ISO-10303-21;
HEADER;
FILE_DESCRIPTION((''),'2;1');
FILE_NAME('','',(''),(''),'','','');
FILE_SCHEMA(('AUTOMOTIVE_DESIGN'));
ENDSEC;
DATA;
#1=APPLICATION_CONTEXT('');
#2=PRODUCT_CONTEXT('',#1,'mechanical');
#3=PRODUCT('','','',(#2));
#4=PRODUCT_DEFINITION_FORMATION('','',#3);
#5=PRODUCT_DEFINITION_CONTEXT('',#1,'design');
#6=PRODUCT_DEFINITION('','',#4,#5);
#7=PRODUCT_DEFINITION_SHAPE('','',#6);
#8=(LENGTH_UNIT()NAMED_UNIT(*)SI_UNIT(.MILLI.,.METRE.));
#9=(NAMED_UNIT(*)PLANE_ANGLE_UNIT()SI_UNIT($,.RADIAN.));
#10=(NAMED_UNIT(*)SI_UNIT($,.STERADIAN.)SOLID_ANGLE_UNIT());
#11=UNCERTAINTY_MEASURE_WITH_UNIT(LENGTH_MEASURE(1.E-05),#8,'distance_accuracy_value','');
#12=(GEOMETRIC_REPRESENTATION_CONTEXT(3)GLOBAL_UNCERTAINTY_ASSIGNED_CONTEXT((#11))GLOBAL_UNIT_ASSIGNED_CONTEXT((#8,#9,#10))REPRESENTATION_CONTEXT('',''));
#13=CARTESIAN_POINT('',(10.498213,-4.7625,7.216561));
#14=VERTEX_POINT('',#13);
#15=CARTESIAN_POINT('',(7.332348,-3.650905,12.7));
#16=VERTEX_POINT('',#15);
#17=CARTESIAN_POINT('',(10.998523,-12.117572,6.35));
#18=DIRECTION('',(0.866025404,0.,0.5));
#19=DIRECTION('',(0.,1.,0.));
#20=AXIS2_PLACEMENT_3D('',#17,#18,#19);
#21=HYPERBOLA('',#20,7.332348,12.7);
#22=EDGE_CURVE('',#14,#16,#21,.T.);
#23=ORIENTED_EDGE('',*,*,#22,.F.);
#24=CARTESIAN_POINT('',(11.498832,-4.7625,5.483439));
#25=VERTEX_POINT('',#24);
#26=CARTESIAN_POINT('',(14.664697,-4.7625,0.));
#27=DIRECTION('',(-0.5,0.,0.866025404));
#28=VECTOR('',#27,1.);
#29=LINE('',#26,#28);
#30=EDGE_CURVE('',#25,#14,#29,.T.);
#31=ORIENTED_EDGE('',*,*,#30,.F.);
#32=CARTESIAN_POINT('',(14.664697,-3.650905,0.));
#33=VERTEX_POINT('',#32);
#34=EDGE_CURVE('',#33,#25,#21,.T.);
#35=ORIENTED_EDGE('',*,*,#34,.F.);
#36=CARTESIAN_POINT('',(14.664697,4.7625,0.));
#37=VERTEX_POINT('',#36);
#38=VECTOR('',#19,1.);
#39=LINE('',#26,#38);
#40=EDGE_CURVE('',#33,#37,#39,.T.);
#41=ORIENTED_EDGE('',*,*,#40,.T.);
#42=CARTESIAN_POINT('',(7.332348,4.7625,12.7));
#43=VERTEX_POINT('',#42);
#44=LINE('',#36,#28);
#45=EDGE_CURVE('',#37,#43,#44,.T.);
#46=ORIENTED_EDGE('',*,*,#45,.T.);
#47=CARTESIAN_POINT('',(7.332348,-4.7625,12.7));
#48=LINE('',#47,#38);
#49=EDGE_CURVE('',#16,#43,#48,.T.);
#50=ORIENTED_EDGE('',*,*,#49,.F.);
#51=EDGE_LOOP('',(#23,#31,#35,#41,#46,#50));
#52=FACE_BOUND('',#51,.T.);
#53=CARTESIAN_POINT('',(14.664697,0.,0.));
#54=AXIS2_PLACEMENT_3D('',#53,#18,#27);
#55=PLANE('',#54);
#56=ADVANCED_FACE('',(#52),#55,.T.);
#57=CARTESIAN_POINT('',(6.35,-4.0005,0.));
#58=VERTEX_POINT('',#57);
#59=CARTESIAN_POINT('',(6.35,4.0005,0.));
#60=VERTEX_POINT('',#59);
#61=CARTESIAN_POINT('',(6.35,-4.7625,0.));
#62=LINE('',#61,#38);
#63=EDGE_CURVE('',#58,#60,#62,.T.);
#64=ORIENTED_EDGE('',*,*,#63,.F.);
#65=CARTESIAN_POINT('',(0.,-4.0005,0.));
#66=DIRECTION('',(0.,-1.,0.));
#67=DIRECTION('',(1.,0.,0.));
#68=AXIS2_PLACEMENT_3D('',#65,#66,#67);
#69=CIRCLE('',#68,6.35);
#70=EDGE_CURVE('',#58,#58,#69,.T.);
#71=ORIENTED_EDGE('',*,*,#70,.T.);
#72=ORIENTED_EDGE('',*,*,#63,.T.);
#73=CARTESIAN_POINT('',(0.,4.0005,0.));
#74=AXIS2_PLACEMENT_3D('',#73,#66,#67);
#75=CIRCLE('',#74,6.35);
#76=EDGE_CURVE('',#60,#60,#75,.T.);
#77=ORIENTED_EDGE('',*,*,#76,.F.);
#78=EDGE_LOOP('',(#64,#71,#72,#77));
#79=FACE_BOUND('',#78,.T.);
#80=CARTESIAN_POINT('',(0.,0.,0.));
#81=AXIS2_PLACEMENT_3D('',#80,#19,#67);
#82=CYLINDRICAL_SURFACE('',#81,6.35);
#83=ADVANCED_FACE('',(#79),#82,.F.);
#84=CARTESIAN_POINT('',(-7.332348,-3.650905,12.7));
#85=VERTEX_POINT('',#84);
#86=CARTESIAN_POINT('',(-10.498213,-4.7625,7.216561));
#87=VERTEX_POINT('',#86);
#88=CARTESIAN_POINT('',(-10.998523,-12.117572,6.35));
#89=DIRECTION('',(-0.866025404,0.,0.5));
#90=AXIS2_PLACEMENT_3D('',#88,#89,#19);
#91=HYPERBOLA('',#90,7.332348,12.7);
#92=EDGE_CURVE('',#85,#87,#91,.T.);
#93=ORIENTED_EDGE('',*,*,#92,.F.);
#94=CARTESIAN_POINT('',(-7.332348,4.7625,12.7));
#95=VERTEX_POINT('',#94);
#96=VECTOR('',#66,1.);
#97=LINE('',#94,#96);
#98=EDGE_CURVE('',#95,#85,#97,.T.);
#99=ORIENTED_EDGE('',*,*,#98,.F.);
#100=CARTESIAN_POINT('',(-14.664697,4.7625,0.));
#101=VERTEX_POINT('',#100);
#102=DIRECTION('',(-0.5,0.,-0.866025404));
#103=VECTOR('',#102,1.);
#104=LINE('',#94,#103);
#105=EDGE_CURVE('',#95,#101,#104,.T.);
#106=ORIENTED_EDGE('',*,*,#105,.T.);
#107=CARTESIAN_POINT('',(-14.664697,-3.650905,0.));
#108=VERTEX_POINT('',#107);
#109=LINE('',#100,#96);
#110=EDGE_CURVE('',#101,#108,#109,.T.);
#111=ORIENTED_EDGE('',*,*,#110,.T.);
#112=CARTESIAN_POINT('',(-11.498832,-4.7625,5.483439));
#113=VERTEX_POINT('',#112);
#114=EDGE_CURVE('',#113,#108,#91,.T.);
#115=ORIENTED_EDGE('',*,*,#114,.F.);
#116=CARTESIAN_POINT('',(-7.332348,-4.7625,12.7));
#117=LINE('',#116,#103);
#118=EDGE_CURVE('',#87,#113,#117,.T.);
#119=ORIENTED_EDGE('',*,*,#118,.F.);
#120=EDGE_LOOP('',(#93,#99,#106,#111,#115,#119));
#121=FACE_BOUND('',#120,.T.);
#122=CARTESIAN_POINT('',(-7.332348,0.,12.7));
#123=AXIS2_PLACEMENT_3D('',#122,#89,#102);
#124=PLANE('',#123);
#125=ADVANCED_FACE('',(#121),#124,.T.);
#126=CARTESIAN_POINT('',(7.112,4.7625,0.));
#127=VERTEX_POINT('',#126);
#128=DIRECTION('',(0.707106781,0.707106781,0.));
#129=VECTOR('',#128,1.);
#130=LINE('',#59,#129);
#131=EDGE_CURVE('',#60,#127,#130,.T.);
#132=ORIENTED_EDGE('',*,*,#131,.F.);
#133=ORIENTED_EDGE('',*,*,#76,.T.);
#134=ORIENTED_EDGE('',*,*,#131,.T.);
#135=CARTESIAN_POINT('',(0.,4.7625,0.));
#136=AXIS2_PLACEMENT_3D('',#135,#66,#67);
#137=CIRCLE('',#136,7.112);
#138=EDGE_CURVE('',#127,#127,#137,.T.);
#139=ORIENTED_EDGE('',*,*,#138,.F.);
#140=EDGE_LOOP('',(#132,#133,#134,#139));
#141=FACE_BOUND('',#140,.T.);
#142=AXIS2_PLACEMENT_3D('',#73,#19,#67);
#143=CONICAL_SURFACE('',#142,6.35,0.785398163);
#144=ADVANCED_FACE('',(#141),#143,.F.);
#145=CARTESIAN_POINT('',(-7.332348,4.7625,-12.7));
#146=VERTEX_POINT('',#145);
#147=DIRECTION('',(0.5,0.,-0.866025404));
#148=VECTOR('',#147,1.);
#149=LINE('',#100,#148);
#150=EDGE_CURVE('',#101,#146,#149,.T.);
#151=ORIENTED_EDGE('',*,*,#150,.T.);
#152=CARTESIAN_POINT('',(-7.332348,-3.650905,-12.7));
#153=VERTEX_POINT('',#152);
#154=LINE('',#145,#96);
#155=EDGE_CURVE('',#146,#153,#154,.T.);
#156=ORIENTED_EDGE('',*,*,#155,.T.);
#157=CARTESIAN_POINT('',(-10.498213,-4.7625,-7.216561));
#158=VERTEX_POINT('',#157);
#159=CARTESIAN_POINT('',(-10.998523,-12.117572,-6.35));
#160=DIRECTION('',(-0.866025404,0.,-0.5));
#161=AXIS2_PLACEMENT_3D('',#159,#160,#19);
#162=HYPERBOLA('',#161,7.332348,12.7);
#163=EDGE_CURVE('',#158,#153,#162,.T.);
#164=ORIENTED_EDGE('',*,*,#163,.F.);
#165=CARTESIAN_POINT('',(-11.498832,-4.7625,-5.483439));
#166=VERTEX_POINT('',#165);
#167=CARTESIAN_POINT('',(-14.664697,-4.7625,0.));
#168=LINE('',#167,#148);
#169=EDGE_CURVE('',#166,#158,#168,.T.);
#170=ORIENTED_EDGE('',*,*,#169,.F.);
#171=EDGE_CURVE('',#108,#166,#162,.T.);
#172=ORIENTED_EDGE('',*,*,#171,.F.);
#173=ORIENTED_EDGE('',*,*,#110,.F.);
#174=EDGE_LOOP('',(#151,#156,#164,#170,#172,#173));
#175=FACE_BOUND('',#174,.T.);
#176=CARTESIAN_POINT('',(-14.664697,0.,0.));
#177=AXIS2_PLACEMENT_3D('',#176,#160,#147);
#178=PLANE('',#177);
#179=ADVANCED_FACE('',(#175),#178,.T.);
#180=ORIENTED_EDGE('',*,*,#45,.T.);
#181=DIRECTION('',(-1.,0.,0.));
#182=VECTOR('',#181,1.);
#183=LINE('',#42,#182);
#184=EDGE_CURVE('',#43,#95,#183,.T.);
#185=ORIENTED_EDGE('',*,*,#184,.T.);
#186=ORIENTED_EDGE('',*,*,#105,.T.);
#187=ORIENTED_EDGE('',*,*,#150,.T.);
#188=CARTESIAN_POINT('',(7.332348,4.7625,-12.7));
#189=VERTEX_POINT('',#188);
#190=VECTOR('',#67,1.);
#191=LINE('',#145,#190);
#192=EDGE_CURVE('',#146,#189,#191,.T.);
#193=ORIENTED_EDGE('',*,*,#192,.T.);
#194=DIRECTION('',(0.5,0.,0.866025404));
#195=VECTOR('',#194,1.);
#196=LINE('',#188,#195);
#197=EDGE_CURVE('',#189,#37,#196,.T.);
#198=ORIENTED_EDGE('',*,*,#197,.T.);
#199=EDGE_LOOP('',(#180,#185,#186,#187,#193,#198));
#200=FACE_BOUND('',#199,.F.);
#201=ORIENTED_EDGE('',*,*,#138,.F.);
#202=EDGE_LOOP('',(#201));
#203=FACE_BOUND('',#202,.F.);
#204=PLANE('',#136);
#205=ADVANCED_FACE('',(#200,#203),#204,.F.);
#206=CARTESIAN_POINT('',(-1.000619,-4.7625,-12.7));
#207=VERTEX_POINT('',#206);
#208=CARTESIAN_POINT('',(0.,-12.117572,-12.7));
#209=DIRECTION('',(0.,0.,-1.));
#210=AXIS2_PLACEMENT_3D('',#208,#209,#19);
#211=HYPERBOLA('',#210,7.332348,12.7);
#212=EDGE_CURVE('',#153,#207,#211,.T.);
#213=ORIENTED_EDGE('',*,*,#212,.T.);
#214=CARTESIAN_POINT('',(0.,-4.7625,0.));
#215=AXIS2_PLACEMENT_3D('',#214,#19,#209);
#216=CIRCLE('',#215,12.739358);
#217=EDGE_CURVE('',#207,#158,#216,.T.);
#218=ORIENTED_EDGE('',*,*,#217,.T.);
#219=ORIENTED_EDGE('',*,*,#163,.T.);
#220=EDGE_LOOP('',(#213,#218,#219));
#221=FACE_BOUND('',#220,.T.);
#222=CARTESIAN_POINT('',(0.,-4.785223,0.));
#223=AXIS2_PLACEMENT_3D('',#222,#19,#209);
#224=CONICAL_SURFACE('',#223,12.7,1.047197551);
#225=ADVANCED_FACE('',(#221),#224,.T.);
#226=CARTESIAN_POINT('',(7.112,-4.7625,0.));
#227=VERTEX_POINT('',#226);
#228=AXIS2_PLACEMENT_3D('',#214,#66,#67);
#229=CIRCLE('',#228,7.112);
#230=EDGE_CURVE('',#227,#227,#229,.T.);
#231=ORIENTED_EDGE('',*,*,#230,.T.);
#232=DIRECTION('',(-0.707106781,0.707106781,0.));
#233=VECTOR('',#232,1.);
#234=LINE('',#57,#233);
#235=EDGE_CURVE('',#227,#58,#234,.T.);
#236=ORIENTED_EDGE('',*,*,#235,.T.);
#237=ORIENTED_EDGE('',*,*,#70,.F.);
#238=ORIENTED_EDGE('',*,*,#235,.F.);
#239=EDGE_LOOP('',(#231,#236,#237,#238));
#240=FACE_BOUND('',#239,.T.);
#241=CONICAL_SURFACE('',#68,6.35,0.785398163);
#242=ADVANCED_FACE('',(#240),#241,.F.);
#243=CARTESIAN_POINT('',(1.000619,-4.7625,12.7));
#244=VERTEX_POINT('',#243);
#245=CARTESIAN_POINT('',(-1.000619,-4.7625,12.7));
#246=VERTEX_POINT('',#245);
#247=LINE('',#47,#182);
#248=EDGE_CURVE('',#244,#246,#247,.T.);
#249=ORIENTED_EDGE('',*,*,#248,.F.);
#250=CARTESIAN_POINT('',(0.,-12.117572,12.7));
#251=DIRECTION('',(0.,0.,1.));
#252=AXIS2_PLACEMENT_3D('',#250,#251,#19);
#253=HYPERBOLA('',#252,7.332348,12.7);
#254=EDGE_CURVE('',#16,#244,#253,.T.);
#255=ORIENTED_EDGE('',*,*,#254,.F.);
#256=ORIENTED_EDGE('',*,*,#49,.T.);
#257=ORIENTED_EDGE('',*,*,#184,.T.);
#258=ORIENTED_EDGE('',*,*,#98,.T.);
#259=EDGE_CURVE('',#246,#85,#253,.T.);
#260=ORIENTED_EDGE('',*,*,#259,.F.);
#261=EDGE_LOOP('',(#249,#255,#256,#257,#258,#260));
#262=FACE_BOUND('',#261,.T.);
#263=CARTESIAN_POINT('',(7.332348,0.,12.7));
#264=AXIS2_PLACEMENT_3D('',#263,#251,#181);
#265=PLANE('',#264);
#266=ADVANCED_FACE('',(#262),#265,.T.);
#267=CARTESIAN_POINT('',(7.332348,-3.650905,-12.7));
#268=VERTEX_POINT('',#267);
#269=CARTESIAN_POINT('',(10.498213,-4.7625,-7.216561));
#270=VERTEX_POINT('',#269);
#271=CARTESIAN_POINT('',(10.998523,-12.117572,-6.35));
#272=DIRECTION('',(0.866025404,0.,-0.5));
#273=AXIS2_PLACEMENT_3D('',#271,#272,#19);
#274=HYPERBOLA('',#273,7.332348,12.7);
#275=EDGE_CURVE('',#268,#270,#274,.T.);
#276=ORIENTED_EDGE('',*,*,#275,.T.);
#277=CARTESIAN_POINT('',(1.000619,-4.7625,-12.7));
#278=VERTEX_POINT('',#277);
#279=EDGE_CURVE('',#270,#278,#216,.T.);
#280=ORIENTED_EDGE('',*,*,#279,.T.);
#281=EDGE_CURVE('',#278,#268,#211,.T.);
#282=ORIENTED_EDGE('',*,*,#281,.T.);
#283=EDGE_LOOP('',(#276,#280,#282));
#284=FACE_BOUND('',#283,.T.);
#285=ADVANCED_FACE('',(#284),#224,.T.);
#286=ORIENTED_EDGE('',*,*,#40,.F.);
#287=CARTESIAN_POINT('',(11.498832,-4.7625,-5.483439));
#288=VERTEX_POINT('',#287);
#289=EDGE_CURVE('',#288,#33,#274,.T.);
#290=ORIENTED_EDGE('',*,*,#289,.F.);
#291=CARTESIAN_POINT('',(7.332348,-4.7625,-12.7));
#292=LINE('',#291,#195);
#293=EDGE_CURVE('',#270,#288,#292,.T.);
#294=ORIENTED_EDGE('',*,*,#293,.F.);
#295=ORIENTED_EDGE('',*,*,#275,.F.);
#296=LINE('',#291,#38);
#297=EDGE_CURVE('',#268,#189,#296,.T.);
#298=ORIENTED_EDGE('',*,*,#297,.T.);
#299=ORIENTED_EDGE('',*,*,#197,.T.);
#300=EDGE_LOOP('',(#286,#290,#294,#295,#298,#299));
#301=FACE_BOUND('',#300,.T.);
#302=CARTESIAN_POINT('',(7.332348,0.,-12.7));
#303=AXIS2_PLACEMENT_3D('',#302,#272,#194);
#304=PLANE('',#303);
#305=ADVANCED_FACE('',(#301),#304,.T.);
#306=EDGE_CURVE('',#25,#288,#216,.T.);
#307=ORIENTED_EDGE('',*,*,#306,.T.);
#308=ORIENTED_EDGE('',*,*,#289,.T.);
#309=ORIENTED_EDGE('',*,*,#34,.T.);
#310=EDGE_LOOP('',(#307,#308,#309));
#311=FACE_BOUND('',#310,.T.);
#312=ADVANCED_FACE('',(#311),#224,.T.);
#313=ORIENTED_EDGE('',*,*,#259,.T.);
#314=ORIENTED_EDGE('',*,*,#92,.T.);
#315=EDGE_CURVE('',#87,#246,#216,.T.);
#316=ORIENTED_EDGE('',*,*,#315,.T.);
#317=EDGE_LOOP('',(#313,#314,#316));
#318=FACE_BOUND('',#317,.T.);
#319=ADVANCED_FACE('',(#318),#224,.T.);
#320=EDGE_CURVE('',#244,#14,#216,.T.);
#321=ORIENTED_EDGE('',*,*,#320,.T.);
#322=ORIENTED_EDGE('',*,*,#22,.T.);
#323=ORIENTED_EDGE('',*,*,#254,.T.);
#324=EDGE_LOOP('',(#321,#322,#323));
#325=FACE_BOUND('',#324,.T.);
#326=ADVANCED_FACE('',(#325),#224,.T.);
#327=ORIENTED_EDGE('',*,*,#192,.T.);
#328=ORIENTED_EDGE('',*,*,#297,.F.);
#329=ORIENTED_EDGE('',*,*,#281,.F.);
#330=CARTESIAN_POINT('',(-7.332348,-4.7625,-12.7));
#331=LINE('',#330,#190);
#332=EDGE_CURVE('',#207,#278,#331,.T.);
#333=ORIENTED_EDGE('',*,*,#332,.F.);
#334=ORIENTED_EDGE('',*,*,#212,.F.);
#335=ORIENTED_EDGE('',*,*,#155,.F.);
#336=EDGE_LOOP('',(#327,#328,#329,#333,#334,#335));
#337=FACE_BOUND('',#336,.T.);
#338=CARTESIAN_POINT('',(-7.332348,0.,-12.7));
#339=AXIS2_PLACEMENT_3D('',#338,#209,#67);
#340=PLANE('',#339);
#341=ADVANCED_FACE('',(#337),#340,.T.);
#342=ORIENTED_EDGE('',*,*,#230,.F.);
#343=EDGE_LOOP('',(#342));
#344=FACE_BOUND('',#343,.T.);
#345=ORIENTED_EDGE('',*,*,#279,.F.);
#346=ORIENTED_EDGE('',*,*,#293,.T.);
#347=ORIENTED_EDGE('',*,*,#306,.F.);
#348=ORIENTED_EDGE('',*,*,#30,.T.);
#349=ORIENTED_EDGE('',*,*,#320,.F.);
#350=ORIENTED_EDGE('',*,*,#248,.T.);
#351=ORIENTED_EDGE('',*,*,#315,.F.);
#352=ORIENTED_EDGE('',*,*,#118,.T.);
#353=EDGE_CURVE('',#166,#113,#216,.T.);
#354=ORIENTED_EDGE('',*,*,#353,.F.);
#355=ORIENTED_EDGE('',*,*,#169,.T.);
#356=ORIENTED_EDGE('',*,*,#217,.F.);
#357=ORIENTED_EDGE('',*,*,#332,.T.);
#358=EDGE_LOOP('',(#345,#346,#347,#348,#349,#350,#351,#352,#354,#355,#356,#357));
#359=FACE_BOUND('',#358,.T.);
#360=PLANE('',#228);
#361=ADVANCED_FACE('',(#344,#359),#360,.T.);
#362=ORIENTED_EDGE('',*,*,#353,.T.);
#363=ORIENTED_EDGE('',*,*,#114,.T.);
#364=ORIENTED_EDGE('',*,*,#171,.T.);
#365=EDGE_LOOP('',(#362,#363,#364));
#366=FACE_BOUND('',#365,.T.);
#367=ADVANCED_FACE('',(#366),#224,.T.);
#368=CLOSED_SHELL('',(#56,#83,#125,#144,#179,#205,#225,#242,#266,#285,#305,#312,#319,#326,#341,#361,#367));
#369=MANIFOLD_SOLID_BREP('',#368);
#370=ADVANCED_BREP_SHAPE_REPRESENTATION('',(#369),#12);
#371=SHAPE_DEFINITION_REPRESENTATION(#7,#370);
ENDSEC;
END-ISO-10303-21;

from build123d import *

# Parameters (mm, degrees)
F0_R     = 6.35
F1_DEPTH = 4.7625
F2_SIZE  = 0.762


# Not quite as in the source:
# - a feature names something its author has since deleted; it is built from what else it names


with BuildPart() as f1:
    # F0 (on Front) → F1 (new body, symmetric)
    with BuildSketch(Plane.XZ):
        Polygon((7.3323484187, 12.7), (-7.3323484187, 12.7), (-14.6646968374, 0), (-7.3323484187, -12.7), (7.3323484187, -12.7), (14.6646968374, 0), align=None)
        Circle(F0_R, mode=Mode.SUBTRACT)
    extrude(amount=F1_DEPTH, both=True)

    # F2
    f2_edges = [f1.edges().sort_by_distance(p)[0] for p in [
        (-6.35, -4.7625, 0),
        (-6.35, 4.7625, 0),
    ]]
    chamfer(f2_edges, length=F2_SIZE)

    # F4: sweep along a path in F4_path
    with BuildLine(Plane(origin=(7.112, -4.7625, 0), x_dir=(0, 0, -1), z_dir=(0, 1, 0))) as f4_path:
        CenterArc((0, 7.112), 7.112, 0, 360)
    # F3 (on Top) → F4 (sweep, cut)
    with BuildSketch(Plane.XY):
        Polygon((-14.8424788945, -5.049383917), (-12.7, -4.7852232567), (-14.8424788945, -3.5482624902), align=None)
    sweep(path=f4_path.line, mode=Mode.SUBTRACT)


solid = f1.part
